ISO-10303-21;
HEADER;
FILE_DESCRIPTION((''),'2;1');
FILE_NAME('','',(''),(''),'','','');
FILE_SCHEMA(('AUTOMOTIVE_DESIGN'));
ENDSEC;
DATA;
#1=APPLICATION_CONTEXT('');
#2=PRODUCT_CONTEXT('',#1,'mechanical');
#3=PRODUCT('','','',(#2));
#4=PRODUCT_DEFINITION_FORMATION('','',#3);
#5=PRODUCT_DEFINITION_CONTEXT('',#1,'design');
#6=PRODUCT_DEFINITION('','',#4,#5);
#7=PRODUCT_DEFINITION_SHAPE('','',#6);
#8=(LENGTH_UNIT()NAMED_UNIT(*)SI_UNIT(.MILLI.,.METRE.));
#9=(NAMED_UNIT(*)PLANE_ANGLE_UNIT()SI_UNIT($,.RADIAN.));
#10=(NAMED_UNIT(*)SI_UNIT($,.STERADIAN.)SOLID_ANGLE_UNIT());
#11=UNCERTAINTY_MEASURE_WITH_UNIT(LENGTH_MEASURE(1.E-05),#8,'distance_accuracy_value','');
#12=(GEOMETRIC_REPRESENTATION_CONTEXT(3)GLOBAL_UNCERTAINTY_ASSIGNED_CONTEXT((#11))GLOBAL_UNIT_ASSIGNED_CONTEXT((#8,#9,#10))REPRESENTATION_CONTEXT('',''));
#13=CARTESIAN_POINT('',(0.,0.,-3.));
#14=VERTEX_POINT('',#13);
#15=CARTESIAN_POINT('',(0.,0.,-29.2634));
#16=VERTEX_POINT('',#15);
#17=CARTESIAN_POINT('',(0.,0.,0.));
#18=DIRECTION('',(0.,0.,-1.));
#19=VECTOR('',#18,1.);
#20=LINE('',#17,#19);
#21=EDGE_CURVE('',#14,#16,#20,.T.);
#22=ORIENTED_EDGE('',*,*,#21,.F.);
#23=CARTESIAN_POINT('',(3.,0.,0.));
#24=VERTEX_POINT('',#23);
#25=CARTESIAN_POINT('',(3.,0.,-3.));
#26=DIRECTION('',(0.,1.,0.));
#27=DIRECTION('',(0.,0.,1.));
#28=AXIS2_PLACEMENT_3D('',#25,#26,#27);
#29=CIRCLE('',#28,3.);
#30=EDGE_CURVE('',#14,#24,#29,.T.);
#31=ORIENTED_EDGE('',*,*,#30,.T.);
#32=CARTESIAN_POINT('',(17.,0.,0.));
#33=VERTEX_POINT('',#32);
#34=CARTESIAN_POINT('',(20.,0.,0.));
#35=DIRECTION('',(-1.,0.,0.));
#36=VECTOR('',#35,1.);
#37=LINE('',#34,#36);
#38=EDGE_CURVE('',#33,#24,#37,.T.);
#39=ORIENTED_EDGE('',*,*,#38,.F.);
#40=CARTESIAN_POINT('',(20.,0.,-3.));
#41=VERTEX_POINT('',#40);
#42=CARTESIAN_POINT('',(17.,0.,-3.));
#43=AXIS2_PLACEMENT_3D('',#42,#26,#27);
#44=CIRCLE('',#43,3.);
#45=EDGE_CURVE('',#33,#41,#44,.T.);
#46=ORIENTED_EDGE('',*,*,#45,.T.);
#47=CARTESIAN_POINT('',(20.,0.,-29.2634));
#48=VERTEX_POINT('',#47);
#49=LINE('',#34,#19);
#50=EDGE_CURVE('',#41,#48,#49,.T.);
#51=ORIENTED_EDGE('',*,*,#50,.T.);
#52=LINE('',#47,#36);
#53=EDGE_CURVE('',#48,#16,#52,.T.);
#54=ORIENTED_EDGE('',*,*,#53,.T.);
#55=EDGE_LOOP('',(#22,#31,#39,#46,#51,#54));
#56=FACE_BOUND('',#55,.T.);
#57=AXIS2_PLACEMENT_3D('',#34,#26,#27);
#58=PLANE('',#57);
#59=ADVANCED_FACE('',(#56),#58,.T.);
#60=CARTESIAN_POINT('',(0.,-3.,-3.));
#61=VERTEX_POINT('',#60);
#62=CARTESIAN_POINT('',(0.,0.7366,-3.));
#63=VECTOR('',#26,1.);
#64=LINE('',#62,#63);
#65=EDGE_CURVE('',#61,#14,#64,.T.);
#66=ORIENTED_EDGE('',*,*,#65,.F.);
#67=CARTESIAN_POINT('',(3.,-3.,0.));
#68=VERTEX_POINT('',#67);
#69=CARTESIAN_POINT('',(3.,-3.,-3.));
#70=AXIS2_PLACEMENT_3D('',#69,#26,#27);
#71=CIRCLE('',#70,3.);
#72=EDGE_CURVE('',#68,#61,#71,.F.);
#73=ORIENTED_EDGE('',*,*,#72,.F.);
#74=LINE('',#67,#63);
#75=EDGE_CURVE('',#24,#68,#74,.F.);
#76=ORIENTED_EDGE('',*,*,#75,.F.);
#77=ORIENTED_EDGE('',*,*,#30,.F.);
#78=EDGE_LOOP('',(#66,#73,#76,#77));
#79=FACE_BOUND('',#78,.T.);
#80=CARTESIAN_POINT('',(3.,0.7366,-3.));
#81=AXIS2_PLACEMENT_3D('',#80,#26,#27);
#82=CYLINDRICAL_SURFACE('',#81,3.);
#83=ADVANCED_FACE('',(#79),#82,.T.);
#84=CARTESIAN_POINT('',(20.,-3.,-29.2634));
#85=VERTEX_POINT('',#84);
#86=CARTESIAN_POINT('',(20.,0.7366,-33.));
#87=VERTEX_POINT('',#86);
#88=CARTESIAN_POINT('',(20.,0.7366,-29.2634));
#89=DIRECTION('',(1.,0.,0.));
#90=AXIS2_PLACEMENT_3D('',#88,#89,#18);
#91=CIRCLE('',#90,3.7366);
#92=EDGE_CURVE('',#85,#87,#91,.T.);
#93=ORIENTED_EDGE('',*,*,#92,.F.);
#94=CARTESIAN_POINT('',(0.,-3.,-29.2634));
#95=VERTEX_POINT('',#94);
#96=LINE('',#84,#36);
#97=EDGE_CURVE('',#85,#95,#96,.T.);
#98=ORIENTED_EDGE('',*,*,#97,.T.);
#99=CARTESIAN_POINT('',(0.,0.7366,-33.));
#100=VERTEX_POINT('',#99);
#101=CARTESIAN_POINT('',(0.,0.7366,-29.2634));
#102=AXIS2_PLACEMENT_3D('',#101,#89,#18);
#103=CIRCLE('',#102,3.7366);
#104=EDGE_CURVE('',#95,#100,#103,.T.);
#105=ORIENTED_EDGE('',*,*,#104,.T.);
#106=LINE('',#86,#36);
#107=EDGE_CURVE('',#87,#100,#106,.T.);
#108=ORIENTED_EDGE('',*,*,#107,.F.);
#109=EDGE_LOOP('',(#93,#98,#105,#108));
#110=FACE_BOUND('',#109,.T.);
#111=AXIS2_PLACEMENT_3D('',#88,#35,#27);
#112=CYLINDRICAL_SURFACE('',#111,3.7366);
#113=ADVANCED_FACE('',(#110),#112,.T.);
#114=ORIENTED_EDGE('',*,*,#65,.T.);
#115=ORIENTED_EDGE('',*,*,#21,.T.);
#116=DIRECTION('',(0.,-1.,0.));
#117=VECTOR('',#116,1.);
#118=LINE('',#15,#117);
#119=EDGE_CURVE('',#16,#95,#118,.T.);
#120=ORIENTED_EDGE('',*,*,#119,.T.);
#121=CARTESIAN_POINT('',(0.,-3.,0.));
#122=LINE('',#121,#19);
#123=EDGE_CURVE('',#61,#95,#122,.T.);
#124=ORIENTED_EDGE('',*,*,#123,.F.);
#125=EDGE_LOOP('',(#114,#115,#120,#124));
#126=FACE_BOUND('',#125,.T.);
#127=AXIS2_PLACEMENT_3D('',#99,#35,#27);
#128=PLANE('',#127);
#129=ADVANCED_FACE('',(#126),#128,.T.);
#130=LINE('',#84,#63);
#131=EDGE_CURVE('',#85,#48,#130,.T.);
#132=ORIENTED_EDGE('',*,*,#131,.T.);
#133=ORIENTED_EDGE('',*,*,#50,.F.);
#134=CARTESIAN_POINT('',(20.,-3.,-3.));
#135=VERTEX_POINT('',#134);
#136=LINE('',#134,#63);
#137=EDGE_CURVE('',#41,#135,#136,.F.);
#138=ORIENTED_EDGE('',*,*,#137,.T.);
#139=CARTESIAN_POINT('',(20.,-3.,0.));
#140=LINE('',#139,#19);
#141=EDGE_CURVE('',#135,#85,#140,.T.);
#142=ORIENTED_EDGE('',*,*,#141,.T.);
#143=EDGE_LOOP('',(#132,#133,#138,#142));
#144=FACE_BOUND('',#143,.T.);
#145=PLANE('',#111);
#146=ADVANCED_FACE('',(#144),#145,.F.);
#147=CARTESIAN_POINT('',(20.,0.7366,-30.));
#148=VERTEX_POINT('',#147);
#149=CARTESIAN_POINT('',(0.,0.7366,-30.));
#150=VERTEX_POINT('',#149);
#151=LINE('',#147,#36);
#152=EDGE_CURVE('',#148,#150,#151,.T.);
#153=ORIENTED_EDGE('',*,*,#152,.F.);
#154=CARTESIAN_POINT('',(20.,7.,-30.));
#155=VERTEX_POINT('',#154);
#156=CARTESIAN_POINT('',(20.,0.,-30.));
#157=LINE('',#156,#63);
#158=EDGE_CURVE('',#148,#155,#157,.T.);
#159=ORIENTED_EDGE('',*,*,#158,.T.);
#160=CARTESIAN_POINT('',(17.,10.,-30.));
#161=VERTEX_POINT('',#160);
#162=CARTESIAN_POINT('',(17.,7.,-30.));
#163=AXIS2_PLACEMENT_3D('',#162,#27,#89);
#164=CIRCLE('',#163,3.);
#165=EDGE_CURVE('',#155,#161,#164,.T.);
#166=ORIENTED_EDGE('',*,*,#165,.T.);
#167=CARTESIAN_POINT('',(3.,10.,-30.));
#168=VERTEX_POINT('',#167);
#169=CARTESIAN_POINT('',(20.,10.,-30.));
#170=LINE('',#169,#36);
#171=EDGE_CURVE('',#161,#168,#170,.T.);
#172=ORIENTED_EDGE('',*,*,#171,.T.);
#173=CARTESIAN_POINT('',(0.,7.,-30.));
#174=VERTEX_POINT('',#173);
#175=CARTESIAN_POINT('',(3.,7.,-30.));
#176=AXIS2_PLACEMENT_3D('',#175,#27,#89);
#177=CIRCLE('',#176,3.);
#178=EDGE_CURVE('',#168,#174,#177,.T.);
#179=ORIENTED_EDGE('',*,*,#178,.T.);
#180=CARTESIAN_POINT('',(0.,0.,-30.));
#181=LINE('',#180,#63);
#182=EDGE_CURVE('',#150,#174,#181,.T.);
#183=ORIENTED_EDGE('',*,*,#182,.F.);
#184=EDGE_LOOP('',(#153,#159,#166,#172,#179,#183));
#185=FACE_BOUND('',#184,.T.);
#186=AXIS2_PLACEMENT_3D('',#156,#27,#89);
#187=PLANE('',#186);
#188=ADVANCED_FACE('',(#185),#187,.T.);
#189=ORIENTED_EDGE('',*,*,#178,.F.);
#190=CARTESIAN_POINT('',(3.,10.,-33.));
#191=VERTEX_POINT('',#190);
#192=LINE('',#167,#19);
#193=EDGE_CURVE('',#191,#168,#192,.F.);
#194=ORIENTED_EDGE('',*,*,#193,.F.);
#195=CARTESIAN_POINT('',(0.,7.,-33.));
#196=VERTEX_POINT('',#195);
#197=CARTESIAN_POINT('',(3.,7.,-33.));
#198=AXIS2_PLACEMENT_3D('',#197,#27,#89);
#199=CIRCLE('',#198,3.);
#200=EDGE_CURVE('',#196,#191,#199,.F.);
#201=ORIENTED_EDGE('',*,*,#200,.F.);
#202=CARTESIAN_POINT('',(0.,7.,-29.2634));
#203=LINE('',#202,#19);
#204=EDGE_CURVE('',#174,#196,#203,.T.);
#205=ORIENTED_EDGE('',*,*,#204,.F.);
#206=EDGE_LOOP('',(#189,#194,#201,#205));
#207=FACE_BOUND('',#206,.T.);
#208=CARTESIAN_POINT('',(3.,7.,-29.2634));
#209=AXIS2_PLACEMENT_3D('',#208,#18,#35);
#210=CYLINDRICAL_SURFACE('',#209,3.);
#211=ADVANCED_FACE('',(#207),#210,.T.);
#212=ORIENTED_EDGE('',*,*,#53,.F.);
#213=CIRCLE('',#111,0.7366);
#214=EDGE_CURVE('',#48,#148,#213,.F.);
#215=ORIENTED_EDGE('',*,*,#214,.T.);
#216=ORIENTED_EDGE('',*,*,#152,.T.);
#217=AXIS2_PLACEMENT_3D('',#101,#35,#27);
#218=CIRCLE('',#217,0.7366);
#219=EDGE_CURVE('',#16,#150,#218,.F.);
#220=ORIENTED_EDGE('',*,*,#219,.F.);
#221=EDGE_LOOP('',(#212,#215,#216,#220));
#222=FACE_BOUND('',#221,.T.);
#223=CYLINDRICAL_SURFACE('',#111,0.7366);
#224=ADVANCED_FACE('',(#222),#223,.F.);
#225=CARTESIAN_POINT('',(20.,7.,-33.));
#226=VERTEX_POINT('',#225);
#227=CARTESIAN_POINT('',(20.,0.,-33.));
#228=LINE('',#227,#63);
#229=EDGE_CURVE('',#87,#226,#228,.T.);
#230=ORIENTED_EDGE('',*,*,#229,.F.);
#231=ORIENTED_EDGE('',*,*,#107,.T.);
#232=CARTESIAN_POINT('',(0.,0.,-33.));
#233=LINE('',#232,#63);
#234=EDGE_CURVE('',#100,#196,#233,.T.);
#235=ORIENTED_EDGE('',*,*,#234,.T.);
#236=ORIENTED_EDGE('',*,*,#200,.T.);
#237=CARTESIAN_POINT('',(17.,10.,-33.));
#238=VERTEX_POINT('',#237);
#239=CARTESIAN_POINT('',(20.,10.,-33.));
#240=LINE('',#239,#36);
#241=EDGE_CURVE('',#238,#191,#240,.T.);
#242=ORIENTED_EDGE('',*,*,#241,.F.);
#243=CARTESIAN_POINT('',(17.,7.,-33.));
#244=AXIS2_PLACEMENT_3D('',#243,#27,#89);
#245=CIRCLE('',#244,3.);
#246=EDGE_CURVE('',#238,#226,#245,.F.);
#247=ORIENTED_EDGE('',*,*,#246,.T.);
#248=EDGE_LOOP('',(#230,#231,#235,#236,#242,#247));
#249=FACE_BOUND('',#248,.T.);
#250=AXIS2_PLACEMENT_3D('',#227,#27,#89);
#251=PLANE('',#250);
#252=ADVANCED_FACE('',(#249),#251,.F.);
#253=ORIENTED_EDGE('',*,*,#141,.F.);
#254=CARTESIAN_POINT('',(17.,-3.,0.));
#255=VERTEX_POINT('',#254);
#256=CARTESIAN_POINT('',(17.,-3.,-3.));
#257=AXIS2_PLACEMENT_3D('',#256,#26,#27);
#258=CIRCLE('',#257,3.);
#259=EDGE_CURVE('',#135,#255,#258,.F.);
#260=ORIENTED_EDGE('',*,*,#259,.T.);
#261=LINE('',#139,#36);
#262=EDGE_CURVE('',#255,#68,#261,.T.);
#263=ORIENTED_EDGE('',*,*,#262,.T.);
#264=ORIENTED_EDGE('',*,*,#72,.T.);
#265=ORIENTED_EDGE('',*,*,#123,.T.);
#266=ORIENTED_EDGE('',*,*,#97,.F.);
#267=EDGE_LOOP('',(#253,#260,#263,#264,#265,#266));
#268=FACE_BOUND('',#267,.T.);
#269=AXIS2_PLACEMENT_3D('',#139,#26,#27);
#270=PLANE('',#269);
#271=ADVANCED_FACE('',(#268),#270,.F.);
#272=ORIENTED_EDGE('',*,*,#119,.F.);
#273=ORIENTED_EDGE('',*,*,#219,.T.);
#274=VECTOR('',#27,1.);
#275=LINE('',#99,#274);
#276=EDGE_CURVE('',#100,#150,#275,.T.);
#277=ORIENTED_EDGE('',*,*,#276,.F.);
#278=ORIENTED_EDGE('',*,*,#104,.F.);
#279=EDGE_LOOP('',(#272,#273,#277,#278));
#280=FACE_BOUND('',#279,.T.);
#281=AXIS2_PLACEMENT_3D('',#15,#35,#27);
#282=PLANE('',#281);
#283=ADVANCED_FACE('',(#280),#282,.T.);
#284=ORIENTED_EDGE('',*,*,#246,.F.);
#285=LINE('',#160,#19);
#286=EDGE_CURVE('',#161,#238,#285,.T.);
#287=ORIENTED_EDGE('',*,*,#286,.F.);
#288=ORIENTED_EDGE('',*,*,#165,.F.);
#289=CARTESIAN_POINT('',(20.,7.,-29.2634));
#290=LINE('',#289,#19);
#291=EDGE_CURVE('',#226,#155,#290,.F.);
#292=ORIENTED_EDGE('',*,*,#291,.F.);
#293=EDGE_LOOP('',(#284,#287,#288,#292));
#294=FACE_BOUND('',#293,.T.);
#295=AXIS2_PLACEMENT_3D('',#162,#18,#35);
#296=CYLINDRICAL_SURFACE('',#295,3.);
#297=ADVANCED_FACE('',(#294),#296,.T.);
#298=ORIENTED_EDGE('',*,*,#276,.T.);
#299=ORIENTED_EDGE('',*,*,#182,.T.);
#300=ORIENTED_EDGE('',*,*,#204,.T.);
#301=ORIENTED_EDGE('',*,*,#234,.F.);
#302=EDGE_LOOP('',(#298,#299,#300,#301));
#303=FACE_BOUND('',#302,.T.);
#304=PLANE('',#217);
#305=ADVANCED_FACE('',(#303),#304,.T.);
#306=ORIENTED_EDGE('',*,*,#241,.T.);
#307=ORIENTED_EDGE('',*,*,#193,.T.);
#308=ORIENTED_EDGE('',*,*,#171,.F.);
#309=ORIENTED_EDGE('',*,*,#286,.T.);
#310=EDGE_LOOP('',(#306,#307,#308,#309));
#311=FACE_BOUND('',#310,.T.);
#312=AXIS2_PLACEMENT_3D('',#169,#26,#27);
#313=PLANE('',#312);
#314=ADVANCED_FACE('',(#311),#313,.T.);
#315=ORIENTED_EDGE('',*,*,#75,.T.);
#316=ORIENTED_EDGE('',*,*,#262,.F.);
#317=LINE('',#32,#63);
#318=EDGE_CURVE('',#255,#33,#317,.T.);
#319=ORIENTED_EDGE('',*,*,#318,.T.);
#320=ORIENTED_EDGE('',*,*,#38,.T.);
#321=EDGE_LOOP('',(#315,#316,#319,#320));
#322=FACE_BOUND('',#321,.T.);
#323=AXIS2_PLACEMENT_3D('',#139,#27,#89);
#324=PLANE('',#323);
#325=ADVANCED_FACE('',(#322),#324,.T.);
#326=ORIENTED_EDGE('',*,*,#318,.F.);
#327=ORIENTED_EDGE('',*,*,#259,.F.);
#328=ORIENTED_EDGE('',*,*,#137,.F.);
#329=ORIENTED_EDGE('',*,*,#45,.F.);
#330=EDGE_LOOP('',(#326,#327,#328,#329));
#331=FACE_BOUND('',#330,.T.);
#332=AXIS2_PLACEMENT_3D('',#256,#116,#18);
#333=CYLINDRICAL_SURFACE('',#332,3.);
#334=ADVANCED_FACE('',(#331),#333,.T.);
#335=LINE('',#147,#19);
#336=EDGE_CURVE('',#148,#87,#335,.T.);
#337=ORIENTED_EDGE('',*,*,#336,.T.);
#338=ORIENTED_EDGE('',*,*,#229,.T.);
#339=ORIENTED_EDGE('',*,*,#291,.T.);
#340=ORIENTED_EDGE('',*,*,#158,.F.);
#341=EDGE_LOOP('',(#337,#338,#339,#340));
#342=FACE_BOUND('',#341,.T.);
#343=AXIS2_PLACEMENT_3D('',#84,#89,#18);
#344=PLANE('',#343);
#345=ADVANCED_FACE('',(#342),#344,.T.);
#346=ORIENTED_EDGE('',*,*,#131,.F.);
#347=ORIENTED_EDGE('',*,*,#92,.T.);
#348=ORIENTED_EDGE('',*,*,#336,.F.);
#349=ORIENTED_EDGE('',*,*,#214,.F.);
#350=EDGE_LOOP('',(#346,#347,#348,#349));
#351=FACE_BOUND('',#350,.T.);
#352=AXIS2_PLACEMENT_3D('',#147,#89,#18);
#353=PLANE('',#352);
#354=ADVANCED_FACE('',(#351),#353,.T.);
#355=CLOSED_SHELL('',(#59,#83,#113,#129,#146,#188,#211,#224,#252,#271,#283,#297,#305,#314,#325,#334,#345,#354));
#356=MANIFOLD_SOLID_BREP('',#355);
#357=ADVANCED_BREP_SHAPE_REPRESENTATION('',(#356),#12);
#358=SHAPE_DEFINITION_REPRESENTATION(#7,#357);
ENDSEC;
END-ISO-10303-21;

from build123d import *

# Parameters (mm, degrees)
BASE_FLANGE1_DEPTH = 20
FILLET1_R          = 3


# Sheet-metal steps are written as plain solids
with BuildPart() as part:
    # Sketch1 → Base-Flange1 (new body)
    with BuildSketch(Plane(origin=(0, 0, 0), x_dir=(0, 0, -1), z_dir=(1, 0, 0))):
        with BuildLine():
            Line((0, 0), (29.2634, 0))
            ThreePointArc((29.2634, 0), (29.784254855, 0.215745145), (30, 0.7366))
            Line((30, 0.7366), (30, 10))
            Line((30, 10), (33, 10))
            Line((33, 10), (33, 0.7366))
            ThreePointArc((33, 0.7366), (31.905575199, -1.905575199), (29.2634, -3))
            Line((29.2634, -3), (0, -3))
            Line((0, -3), (0, 0))
        make_face()
    extrude(amount=BASE_FLANGE1_DEPTH)

    # Fillet1
    fillet1_edges = [part.edges().sort_by_distance(p)[0] for p in [
        (20, -1.5, 0),
        (20, 10, -31.5),
        (0, -1.5, 0),
        (0, 10, -31.5),
    ]]
    fillet(fillet1_edges, radius=FILLET1_R)


solid = part.part
